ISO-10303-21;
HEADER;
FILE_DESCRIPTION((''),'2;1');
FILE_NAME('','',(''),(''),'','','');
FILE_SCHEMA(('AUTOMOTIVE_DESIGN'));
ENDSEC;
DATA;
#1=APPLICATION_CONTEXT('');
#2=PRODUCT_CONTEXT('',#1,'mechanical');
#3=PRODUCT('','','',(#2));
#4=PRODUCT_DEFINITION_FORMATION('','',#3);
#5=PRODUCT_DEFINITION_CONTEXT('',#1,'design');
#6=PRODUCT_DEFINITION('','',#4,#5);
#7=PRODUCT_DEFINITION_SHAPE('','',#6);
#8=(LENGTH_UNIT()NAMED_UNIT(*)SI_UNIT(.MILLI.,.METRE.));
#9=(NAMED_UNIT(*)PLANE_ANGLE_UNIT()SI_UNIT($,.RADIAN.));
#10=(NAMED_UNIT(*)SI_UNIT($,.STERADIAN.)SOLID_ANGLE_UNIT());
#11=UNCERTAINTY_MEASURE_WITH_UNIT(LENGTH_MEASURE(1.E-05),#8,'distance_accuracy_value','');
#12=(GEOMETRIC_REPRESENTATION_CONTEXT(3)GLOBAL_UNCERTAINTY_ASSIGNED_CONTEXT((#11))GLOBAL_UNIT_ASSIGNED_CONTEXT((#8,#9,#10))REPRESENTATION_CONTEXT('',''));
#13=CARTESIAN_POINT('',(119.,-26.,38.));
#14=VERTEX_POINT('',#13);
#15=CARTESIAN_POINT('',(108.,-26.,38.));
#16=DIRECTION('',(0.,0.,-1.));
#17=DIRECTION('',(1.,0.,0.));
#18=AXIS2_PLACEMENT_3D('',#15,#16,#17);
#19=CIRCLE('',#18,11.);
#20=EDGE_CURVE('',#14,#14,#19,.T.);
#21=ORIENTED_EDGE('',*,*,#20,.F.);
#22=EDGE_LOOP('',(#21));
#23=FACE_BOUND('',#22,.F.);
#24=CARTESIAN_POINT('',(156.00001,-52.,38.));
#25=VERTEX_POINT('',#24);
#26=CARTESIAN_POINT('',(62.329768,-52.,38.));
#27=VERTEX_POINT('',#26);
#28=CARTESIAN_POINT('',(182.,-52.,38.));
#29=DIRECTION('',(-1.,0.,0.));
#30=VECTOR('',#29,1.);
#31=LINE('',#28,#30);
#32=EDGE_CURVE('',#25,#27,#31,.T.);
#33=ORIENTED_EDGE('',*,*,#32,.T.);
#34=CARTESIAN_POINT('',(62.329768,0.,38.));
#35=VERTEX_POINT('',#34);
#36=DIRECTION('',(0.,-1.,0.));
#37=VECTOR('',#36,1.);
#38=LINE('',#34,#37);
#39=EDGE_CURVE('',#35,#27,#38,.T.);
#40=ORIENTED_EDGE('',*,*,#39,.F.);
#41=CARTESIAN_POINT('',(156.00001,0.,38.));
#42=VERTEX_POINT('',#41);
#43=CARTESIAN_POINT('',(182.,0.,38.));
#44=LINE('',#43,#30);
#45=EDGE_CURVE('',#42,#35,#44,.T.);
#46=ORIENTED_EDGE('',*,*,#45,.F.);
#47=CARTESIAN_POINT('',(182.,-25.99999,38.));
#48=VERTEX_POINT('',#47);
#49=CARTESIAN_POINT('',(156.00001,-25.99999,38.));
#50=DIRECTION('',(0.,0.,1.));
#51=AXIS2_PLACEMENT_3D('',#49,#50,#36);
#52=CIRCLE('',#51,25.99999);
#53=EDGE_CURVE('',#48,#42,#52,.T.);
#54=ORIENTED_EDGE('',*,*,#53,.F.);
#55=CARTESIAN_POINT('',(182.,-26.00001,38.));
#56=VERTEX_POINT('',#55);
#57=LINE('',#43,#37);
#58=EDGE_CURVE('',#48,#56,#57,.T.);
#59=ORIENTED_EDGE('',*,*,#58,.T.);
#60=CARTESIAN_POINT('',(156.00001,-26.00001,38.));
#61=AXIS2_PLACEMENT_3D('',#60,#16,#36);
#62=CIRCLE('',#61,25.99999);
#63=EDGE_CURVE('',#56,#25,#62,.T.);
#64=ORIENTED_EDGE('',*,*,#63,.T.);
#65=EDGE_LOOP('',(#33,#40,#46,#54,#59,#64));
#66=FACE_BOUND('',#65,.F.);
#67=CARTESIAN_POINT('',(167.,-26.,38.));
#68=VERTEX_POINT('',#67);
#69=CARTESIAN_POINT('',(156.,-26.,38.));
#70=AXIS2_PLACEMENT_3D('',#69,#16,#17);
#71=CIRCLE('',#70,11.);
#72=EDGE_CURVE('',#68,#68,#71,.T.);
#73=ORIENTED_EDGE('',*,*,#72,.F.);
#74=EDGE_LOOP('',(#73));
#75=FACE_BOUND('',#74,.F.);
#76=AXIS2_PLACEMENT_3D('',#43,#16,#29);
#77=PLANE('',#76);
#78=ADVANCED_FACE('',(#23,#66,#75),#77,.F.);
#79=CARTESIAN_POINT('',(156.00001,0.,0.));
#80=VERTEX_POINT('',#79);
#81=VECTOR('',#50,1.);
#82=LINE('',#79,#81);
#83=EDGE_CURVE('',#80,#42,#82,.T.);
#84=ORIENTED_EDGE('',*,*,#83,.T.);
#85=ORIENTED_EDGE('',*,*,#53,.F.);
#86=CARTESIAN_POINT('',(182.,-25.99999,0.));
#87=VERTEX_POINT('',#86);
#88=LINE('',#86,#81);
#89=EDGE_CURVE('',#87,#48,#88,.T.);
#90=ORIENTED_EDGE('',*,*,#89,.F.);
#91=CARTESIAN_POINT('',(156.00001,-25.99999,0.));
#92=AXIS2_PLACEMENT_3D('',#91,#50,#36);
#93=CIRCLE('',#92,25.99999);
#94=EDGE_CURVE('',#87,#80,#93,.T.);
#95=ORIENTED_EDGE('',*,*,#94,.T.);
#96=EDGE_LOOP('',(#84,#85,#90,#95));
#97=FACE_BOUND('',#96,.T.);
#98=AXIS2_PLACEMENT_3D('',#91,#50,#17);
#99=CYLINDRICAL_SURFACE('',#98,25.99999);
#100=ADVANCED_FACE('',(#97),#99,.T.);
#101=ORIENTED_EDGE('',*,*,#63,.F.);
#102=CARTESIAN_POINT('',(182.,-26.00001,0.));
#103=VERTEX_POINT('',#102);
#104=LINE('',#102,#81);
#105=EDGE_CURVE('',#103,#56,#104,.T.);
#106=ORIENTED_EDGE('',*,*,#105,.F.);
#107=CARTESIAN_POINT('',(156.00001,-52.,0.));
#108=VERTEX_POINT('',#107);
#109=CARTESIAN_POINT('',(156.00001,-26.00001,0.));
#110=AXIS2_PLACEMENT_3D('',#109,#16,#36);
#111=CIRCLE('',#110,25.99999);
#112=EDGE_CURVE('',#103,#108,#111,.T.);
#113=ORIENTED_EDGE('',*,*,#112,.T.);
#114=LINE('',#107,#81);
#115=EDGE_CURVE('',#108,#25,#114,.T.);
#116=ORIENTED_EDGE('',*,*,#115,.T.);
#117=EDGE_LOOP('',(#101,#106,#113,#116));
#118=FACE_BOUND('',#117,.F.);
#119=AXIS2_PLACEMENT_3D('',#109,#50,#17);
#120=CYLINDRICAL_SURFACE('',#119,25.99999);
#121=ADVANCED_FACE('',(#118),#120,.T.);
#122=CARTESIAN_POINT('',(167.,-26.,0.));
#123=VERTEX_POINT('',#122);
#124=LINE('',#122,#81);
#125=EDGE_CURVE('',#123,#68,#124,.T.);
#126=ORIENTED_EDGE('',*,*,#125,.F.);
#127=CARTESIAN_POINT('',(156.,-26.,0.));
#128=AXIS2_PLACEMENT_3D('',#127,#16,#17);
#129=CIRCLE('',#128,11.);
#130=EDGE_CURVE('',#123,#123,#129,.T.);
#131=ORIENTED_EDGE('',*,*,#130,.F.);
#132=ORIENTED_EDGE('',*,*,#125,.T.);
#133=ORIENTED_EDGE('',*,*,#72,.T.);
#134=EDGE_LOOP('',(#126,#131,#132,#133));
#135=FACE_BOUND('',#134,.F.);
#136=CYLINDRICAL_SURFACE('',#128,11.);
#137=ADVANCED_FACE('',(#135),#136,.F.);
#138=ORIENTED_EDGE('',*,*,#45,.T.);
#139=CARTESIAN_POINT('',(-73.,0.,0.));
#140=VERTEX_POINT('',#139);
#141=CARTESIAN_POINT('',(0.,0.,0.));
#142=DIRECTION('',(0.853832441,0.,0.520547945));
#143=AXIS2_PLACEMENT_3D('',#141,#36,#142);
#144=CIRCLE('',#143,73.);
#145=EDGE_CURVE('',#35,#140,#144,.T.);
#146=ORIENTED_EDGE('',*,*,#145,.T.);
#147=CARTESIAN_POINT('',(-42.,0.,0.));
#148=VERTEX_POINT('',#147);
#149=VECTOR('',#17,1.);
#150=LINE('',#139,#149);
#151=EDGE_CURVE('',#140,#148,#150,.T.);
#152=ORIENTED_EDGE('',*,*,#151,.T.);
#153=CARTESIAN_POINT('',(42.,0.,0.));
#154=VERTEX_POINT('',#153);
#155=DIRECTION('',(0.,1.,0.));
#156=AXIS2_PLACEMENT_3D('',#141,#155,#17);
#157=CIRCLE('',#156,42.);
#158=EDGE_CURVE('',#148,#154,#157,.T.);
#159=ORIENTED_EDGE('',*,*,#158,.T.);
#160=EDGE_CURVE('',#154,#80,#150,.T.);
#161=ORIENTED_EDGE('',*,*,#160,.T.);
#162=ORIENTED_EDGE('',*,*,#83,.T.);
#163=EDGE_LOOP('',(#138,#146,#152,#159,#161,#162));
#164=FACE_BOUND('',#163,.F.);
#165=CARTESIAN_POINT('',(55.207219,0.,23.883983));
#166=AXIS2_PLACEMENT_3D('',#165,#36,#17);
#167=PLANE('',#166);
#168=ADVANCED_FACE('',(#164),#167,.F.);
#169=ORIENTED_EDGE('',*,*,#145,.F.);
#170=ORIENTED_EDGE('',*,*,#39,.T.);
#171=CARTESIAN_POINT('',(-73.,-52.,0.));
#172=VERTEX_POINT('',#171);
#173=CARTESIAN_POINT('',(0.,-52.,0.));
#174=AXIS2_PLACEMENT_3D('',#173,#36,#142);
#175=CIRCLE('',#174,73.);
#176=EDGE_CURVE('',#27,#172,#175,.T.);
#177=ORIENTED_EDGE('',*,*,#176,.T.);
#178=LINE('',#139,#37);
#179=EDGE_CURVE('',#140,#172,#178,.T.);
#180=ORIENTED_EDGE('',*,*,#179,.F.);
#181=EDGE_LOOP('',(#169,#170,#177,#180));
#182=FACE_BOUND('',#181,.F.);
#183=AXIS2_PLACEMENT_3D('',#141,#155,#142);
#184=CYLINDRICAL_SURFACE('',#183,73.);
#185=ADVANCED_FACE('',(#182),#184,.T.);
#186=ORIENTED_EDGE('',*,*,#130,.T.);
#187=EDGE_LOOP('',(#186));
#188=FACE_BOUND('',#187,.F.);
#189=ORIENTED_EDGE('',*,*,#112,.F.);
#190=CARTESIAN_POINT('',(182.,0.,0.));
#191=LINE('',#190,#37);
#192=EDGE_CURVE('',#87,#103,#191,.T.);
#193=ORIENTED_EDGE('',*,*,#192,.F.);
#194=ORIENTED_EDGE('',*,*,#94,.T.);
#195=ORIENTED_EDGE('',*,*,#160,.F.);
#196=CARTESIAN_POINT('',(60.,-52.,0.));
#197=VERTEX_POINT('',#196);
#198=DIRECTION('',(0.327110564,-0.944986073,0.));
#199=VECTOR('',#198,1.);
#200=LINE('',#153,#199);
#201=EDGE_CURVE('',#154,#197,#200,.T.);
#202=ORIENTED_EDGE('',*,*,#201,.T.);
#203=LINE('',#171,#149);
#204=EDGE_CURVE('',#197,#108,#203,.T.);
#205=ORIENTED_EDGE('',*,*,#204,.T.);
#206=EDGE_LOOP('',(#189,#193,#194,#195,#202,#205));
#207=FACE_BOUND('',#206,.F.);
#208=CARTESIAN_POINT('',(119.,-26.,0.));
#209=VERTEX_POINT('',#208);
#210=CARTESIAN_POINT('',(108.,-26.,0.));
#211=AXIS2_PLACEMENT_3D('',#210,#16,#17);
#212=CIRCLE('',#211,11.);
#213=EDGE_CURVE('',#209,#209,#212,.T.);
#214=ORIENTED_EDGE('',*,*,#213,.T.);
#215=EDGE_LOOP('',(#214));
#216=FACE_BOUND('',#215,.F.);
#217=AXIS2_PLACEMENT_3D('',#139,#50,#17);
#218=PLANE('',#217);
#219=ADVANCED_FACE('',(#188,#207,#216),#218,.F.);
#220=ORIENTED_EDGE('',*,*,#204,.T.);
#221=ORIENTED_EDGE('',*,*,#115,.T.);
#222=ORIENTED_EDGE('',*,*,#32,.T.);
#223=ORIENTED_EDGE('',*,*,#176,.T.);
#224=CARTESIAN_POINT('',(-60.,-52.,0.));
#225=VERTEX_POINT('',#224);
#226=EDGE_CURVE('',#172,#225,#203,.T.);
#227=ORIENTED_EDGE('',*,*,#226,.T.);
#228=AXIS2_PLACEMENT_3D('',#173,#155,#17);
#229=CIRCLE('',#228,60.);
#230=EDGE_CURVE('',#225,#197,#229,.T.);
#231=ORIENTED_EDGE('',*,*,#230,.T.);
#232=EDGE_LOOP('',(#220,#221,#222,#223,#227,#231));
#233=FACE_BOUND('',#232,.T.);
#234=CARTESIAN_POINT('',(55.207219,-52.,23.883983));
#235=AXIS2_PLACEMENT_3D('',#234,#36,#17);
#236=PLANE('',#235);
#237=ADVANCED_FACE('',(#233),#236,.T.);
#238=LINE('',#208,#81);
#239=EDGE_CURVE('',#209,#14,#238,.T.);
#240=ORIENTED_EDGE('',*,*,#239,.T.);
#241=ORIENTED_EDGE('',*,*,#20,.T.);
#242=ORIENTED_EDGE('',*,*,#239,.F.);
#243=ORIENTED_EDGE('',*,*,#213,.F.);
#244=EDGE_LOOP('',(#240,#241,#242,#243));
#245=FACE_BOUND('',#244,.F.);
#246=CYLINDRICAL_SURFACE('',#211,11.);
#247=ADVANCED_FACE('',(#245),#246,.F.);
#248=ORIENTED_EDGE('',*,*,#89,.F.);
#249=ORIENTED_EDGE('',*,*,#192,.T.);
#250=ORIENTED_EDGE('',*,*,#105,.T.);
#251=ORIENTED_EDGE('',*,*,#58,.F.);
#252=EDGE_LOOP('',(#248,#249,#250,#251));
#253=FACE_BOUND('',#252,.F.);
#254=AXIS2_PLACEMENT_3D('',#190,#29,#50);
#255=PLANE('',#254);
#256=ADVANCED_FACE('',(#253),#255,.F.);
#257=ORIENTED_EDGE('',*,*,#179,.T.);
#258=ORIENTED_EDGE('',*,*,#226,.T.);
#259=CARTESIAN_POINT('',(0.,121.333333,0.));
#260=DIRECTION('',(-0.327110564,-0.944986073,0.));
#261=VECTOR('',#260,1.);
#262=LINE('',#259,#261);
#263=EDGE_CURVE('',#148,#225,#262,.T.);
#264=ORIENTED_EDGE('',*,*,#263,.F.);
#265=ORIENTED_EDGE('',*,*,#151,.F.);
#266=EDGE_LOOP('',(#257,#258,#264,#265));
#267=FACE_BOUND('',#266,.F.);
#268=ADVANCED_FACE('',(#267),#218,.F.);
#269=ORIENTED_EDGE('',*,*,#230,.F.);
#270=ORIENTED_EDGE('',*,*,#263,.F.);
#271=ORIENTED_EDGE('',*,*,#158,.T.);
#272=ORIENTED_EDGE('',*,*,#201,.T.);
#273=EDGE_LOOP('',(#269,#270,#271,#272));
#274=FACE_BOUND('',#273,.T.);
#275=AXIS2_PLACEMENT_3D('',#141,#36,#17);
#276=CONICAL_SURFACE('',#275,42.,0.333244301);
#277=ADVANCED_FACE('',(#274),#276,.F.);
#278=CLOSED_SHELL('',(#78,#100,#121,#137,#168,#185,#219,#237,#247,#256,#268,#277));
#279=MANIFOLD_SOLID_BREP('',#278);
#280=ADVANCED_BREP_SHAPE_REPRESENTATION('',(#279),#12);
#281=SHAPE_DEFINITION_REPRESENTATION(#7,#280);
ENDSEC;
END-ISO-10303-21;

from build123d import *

# Parameters (mm, degrees)
F1_DEPTH = 52
F4_R     = 25.99999
F5_R     = 11
F6_DEPTH = 92


# Not quite as in the source:
# - a fillet or chamfer is up to 0.001 mm smaller than in the source, because OpenCascade refuses the exact size


with BuildPart() as f1:
    # F0 (on Front) → F1 (new body)
    with BuildSketch(Plane.XZ):
        with BuildLine():
            Line((182, 38), (62.329768169, 38))
            ThreePointArc((62.329768169, 38), (-19.7348286497, 70.2818364741), (-73, 0))
            Line((-73, 0), (182, 0))
            Line((182, 0), (182, 38))
        make_face()
    extrude(amount=F1_DEPTH)

    # F2 (on face) → F3 (revolve, cut)
    with BuildSketch(Plane(origin=(0, 0, 0), x_dir=(1, 0, 0), z_dir=(0, 0, -1))):
        Polygon((60, 52), (0, 52), (0, 0), (42, 0), align=None)
    revolve(axis=Axis((0, -26, 0), (0, 1, 0)), mode=Mode.SUBTRACT)

    # F4 (radius 26 in the source; OpenCascade refuses exactly that, so slightly less here)
    f4_edges = [f1.edges().sort_by_distance(p)[0] for p in [
        (182, -52, 19),
        (182, 0, 19),
    ]]
    fillet(f4_edges, radius=F4_R)

    # F5 (on face) → F6 (cut)
    with BuildSketch(Plane(origin=(0, 0, 0), x_dir=(1, 0, 0), z_dir=(0, 0, -1))):
        with Locations((108, 26)):
            Circle(F5_R)
        with Locations((156, 26)):
            Circle(F5_R)
    extrude(amount=-F6_DEPTH, mode=Mode.SUBTRACT)


solid = f1.part
